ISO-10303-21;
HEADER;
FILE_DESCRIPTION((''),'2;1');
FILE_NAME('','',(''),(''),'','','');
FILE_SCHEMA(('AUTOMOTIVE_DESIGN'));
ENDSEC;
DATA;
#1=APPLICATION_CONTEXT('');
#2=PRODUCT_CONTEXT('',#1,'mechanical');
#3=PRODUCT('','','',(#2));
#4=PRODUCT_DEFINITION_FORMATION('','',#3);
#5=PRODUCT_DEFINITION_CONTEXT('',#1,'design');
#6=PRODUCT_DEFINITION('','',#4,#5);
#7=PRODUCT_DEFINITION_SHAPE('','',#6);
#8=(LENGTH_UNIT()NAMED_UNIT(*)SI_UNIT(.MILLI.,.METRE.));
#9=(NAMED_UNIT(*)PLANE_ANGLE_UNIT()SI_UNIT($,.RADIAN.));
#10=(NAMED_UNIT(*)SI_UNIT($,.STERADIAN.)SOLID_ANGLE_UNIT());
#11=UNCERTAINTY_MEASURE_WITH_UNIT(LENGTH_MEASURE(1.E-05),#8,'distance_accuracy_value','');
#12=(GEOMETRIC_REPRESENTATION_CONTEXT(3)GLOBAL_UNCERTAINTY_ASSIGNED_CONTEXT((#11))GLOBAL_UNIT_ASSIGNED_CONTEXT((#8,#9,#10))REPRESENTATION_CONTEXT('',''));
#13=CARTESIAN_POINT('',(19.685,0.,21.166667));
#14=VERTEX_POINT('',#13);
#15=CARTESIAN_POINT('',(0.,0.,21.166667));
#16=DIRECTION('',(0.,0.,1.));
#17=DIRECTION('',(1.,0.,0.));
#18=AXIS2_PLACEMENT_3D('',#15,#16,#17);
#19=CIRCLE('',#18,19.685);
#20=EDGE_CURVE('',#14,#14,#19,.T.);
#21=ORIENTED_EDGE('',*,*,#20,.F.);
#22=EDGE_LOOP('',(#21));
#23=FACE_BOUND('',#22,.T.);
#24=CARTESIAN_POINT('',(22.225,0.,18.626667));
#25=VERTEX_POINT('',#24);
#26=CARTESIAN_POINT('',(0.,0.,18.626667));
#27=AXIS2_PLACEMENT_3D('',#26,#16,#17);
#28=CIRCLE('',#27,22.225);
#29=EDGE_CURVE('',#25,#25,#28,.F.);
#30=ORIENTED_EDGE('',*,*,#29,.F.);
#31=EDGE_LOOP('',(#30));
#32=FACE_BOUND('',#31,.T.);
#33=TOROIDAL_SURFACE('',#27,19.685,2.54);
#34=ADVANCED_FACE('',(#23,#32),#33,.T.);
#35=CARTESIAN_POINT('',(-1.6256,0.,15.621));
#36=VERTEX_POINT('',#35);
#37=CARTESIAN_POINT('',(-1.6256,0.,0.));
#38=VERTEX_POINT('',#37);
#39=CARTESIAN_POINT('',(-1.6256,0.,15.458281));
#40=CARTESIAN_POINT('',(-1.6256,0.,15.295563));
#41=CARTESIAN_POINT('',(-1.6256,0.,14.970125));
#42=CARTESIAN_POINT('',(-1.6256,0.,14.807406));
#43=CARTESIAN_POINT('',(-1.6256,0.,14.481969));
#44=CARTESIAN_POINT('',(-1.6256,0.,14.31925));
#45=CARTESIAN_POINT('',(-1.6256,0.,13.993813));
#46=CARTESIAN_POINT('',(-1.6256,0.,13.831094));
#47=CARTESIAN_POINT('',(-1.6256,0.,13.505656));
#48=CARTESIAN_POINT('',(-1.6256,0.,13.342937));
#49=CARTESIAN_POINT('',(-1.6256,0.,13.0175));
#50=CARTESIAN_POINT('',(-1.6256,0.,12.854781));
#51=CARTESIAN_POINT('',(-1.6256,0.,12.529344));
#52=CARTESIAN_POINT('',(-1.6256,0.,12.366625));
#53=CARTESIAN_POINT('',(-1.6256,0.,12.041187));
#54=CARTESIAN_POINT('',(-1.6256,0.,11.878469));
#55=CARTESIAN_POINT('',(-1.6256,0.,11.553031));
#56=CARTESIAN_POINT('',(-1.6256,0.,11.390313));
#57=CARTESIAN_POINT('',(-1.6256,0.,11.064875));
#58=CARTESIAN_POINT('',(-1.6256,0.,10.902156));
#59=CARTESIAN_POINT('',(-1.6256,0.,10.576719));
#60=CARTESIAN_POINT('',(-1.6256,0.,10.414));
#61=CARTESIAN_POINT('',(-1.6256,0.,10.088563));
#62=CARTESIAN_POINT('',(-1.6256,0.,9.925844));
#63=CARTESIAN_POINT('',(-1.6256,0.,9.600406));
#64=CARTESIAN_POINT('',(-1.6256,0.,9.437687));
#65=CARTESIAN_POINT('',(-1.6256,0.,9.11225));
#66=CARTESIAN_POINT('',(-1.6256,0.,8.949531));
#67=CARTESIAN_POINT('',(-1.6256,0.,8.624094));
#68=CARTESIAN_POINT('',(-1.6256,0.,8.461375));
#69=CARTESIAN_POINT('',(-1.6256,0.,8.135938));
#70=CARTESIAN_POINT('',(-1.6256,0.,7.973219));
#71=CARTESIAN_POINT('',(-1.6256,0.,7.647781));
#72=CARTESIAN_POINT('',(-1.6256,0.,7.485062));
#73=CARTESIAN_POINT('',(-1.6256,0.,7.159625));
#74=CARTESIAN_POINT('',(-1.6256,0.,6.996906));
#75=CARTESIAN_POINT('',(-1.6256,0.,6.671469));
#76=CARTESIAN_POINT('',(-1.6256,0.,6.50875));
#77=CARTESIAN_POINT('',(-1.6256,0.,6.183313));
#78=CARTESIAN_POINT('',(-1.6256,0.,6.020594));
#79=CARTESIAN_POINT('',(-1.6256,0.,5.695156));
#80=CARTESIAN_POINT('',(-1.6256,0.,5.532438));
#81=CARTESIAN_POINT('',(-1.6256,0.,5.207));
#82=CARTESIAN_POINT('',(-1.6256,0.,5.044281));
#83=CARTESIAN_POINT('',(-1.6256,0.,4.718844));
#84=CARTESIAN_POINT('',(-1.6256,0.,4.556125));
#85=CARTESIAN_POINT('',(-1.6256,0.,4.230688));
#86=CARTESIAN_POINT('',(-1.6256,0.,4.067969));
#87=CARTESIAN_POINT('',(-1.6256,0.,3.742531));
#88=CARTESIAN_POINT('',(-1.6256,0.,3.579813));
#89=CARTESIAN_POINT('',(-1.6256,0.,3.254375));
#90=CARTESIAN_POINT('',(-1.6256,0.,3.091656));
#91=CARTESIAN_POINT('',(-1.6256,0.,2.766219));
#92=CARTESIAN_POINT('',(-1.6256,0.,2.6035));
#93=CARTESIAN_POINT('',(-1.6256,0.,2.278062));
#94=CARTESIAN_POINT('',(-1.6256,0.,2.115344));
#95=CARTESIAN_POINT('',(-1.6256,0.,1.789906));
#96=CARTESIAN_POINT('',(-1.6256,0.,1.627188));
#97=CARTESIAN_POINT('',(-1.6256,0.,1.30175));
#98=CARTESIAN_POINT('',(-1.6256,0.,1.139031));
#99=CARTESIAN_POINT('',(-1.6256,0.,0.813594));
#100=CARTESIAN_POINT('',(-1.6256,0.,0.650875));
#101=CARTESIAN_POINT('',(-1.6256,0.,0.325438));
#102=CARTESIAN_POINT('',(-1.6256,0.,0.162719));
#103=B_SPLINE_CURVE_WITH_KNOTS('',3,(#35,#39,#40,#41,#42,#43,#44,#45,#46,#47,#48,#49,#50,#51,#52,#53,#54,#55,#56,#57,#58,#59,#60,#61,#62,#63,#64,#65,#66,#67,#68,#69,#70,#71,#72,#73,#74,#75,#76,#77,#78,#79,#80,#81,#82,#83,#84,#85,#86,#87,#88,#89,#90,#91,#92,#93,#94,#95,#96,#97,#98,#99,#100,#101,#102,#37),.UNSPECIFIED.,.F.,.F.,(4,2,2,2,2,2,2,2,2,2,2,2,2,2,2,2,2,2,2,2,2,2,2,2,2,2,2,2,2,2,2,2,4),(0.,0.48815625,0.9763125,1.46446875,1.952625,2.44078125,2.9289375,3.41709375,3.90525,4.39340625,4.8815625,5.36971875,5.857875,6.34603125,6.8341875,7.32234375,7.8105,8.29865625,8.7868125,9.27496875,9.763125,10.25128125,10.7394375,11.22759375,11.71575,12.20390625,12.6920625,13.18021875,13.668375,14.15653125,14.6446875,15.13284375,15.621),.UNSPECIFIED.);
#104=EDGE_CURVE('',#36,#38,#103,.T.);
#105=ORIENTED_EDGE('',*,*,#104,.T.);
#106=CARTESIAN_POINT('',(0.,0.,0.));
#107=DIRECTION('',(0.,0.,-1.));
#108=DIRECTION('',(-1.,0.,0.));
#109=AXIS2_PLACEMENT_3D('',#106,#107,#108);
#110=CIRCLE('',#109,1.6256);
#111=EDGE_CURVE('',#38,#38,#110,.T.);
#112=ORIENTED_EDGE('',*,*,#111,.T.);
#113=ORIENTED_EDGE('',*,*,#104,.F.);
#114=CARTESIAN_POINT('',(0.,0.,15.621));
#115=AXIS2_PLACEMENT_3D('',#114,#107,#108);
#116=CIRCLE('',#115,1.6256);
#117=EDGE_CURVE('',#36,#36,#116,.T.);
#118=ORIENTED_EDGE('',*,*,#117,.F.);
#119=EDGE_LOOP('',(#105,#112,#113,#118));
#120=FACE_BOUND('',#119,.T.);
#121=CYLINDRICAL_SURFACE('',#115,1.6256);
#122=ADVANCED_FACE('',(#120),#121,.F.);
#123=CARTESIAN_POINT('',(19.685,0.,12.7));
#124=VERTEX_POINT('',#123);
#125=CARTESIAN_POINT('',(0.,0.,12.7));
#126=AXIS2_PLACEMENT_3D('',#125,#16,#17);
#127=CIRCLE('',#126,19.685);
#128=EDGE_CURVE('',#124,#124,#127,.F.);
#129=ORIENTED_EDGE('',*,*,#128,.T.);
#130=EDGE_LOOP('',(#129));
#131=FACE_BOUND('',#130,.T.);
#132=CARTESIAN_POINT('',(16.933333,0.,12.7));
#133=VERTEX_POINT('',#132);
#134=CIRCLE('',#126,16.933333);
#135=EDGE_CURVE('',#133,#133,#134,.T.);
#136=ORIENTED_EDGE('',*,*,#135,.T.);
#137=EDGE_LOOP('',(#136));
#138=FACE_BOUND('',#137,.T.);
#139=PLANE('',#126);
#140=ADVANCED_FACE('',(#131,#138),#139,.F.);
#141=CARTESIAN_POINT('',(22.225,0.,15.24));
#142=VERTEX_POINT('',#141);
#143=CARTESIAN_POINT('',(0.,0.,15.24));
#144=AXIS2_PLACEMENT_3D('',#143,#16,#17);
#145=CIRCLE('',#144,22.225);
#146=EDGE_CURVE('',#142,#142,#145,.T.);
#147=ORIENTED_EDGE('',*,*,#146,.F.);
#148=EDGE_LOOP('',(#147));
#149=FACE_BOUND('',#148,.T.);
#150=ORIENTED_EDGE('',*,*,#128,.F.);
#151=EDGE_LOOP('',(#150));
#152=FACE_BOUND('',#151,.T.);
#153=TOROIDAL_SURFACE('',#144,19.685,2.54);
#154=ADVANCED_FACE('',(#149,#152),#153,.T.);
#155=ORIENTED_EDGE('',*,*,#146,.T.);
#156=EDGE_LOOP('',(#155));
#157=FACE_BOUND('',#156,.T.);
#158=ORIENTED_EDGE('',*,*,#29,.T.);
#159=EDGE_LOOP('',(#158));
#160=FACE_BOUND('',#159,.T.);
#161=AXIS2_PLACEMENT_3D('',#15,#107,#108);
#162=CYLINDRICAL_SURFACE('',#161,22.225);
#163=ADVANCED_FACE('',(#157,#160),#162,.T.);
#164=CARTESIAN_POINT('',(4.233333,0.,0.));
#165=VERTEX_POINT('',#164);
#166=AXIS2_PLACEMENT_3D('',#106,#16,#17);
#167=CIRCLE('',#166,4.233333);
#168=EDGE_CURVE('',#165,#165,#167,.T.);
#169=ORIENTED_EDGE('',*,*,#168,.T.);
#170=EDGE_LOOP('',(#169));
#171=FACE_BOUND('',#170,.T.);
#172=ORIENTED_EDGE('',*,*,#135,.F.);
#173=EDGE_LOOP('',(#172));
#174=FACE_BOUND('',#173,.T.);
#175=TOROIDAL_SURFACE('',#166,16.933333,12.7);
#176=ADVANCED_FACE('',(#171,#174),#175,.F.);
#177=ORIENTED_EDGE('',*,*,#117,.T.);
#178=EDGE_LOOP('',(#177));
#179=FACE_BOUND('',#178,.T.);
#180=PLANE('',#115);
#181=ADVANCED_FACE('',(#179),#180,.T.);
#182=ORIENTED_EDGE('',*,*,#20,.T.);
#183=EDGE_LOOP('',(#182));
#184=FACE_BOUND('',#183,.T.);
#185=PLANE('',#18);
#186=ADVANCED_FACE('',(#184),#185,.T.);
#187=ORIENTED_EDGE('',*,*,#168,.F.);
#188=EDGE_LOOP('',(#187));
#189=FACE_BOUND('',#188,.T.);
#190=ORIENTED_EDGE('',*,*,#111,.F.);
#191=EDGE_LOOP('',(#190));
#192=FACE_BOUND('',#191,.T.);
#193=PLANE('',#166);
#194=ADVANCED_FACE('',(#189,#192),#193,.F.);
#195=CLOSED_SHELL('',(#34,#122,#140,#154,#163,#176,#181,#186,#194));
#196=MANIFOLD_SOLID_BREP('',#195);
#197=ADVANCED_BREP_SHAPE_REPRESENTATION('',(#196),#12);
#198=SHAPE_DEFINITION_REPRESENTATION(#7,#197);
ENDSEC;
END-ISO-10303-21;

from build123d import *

# Parameters (mm, degrees)
SKETCH1_R           = 4.233333333
BOSS_EXTRUDE1_DEPTH = 12.7
SKETCH2_R           = 22.225
BOSS_EXTRUDE3_DEPTH = 8.466666667
FILLET1_R           = 12.7
FILLET2_R           = 2.54
SKETCH5_R           = 1.6256
CUT_EXTRUDE2_DEPTH  = 15.621


with BuildPart() as part:
    # Sketch1 → Boss-Extrude1 (new body)
    with BuildSketch(Plane.XY):
        Circle(SKETCH1_R)
    extrude(amount=BOSS_EXTRUDE1_DEPTH)

    # Sketch2 → Boss-Extrude3 (add)
    with BuildSketch(Plane.XY.offset(12.7)):
        Circle(SKETCH2_R)
    extrude(amount=BOSS_EXTRUDE3_DEPTH)

    # Fillet1
    fillet1_edges = [part.edges().sort_by_distance(p)[0] for p in [
        (-4.233333333, 0, 12.7),
    ]]
    fillet(fillet1_edges, radius=FILLET1_R - 0.0001)  # a hair under: the kernel refuses the full size

    # Fillet2
    fillet2_edges = [part.edges().sort_by_distance(p)[0] for p in [
        (-22.225, 0, 12.7),
        (-22.225, 0, 21.166666667),
    ]]
    fillet(fillet2_edges, radius=FILLET2_R)

    # Sketch5 → Cut-Extrude2 (cut)
    with BuildSketch(Plane(origin=(0, 0, 0), x_dir=(-1, 0, 0), z_dir=(0, 0, -1))):
        Circle(SKETCH5_R)
    extrude(amount=-CUT_EXTRUDE2_DEPTH, mode=Mode.SUBTRACT)


solid = part.part
